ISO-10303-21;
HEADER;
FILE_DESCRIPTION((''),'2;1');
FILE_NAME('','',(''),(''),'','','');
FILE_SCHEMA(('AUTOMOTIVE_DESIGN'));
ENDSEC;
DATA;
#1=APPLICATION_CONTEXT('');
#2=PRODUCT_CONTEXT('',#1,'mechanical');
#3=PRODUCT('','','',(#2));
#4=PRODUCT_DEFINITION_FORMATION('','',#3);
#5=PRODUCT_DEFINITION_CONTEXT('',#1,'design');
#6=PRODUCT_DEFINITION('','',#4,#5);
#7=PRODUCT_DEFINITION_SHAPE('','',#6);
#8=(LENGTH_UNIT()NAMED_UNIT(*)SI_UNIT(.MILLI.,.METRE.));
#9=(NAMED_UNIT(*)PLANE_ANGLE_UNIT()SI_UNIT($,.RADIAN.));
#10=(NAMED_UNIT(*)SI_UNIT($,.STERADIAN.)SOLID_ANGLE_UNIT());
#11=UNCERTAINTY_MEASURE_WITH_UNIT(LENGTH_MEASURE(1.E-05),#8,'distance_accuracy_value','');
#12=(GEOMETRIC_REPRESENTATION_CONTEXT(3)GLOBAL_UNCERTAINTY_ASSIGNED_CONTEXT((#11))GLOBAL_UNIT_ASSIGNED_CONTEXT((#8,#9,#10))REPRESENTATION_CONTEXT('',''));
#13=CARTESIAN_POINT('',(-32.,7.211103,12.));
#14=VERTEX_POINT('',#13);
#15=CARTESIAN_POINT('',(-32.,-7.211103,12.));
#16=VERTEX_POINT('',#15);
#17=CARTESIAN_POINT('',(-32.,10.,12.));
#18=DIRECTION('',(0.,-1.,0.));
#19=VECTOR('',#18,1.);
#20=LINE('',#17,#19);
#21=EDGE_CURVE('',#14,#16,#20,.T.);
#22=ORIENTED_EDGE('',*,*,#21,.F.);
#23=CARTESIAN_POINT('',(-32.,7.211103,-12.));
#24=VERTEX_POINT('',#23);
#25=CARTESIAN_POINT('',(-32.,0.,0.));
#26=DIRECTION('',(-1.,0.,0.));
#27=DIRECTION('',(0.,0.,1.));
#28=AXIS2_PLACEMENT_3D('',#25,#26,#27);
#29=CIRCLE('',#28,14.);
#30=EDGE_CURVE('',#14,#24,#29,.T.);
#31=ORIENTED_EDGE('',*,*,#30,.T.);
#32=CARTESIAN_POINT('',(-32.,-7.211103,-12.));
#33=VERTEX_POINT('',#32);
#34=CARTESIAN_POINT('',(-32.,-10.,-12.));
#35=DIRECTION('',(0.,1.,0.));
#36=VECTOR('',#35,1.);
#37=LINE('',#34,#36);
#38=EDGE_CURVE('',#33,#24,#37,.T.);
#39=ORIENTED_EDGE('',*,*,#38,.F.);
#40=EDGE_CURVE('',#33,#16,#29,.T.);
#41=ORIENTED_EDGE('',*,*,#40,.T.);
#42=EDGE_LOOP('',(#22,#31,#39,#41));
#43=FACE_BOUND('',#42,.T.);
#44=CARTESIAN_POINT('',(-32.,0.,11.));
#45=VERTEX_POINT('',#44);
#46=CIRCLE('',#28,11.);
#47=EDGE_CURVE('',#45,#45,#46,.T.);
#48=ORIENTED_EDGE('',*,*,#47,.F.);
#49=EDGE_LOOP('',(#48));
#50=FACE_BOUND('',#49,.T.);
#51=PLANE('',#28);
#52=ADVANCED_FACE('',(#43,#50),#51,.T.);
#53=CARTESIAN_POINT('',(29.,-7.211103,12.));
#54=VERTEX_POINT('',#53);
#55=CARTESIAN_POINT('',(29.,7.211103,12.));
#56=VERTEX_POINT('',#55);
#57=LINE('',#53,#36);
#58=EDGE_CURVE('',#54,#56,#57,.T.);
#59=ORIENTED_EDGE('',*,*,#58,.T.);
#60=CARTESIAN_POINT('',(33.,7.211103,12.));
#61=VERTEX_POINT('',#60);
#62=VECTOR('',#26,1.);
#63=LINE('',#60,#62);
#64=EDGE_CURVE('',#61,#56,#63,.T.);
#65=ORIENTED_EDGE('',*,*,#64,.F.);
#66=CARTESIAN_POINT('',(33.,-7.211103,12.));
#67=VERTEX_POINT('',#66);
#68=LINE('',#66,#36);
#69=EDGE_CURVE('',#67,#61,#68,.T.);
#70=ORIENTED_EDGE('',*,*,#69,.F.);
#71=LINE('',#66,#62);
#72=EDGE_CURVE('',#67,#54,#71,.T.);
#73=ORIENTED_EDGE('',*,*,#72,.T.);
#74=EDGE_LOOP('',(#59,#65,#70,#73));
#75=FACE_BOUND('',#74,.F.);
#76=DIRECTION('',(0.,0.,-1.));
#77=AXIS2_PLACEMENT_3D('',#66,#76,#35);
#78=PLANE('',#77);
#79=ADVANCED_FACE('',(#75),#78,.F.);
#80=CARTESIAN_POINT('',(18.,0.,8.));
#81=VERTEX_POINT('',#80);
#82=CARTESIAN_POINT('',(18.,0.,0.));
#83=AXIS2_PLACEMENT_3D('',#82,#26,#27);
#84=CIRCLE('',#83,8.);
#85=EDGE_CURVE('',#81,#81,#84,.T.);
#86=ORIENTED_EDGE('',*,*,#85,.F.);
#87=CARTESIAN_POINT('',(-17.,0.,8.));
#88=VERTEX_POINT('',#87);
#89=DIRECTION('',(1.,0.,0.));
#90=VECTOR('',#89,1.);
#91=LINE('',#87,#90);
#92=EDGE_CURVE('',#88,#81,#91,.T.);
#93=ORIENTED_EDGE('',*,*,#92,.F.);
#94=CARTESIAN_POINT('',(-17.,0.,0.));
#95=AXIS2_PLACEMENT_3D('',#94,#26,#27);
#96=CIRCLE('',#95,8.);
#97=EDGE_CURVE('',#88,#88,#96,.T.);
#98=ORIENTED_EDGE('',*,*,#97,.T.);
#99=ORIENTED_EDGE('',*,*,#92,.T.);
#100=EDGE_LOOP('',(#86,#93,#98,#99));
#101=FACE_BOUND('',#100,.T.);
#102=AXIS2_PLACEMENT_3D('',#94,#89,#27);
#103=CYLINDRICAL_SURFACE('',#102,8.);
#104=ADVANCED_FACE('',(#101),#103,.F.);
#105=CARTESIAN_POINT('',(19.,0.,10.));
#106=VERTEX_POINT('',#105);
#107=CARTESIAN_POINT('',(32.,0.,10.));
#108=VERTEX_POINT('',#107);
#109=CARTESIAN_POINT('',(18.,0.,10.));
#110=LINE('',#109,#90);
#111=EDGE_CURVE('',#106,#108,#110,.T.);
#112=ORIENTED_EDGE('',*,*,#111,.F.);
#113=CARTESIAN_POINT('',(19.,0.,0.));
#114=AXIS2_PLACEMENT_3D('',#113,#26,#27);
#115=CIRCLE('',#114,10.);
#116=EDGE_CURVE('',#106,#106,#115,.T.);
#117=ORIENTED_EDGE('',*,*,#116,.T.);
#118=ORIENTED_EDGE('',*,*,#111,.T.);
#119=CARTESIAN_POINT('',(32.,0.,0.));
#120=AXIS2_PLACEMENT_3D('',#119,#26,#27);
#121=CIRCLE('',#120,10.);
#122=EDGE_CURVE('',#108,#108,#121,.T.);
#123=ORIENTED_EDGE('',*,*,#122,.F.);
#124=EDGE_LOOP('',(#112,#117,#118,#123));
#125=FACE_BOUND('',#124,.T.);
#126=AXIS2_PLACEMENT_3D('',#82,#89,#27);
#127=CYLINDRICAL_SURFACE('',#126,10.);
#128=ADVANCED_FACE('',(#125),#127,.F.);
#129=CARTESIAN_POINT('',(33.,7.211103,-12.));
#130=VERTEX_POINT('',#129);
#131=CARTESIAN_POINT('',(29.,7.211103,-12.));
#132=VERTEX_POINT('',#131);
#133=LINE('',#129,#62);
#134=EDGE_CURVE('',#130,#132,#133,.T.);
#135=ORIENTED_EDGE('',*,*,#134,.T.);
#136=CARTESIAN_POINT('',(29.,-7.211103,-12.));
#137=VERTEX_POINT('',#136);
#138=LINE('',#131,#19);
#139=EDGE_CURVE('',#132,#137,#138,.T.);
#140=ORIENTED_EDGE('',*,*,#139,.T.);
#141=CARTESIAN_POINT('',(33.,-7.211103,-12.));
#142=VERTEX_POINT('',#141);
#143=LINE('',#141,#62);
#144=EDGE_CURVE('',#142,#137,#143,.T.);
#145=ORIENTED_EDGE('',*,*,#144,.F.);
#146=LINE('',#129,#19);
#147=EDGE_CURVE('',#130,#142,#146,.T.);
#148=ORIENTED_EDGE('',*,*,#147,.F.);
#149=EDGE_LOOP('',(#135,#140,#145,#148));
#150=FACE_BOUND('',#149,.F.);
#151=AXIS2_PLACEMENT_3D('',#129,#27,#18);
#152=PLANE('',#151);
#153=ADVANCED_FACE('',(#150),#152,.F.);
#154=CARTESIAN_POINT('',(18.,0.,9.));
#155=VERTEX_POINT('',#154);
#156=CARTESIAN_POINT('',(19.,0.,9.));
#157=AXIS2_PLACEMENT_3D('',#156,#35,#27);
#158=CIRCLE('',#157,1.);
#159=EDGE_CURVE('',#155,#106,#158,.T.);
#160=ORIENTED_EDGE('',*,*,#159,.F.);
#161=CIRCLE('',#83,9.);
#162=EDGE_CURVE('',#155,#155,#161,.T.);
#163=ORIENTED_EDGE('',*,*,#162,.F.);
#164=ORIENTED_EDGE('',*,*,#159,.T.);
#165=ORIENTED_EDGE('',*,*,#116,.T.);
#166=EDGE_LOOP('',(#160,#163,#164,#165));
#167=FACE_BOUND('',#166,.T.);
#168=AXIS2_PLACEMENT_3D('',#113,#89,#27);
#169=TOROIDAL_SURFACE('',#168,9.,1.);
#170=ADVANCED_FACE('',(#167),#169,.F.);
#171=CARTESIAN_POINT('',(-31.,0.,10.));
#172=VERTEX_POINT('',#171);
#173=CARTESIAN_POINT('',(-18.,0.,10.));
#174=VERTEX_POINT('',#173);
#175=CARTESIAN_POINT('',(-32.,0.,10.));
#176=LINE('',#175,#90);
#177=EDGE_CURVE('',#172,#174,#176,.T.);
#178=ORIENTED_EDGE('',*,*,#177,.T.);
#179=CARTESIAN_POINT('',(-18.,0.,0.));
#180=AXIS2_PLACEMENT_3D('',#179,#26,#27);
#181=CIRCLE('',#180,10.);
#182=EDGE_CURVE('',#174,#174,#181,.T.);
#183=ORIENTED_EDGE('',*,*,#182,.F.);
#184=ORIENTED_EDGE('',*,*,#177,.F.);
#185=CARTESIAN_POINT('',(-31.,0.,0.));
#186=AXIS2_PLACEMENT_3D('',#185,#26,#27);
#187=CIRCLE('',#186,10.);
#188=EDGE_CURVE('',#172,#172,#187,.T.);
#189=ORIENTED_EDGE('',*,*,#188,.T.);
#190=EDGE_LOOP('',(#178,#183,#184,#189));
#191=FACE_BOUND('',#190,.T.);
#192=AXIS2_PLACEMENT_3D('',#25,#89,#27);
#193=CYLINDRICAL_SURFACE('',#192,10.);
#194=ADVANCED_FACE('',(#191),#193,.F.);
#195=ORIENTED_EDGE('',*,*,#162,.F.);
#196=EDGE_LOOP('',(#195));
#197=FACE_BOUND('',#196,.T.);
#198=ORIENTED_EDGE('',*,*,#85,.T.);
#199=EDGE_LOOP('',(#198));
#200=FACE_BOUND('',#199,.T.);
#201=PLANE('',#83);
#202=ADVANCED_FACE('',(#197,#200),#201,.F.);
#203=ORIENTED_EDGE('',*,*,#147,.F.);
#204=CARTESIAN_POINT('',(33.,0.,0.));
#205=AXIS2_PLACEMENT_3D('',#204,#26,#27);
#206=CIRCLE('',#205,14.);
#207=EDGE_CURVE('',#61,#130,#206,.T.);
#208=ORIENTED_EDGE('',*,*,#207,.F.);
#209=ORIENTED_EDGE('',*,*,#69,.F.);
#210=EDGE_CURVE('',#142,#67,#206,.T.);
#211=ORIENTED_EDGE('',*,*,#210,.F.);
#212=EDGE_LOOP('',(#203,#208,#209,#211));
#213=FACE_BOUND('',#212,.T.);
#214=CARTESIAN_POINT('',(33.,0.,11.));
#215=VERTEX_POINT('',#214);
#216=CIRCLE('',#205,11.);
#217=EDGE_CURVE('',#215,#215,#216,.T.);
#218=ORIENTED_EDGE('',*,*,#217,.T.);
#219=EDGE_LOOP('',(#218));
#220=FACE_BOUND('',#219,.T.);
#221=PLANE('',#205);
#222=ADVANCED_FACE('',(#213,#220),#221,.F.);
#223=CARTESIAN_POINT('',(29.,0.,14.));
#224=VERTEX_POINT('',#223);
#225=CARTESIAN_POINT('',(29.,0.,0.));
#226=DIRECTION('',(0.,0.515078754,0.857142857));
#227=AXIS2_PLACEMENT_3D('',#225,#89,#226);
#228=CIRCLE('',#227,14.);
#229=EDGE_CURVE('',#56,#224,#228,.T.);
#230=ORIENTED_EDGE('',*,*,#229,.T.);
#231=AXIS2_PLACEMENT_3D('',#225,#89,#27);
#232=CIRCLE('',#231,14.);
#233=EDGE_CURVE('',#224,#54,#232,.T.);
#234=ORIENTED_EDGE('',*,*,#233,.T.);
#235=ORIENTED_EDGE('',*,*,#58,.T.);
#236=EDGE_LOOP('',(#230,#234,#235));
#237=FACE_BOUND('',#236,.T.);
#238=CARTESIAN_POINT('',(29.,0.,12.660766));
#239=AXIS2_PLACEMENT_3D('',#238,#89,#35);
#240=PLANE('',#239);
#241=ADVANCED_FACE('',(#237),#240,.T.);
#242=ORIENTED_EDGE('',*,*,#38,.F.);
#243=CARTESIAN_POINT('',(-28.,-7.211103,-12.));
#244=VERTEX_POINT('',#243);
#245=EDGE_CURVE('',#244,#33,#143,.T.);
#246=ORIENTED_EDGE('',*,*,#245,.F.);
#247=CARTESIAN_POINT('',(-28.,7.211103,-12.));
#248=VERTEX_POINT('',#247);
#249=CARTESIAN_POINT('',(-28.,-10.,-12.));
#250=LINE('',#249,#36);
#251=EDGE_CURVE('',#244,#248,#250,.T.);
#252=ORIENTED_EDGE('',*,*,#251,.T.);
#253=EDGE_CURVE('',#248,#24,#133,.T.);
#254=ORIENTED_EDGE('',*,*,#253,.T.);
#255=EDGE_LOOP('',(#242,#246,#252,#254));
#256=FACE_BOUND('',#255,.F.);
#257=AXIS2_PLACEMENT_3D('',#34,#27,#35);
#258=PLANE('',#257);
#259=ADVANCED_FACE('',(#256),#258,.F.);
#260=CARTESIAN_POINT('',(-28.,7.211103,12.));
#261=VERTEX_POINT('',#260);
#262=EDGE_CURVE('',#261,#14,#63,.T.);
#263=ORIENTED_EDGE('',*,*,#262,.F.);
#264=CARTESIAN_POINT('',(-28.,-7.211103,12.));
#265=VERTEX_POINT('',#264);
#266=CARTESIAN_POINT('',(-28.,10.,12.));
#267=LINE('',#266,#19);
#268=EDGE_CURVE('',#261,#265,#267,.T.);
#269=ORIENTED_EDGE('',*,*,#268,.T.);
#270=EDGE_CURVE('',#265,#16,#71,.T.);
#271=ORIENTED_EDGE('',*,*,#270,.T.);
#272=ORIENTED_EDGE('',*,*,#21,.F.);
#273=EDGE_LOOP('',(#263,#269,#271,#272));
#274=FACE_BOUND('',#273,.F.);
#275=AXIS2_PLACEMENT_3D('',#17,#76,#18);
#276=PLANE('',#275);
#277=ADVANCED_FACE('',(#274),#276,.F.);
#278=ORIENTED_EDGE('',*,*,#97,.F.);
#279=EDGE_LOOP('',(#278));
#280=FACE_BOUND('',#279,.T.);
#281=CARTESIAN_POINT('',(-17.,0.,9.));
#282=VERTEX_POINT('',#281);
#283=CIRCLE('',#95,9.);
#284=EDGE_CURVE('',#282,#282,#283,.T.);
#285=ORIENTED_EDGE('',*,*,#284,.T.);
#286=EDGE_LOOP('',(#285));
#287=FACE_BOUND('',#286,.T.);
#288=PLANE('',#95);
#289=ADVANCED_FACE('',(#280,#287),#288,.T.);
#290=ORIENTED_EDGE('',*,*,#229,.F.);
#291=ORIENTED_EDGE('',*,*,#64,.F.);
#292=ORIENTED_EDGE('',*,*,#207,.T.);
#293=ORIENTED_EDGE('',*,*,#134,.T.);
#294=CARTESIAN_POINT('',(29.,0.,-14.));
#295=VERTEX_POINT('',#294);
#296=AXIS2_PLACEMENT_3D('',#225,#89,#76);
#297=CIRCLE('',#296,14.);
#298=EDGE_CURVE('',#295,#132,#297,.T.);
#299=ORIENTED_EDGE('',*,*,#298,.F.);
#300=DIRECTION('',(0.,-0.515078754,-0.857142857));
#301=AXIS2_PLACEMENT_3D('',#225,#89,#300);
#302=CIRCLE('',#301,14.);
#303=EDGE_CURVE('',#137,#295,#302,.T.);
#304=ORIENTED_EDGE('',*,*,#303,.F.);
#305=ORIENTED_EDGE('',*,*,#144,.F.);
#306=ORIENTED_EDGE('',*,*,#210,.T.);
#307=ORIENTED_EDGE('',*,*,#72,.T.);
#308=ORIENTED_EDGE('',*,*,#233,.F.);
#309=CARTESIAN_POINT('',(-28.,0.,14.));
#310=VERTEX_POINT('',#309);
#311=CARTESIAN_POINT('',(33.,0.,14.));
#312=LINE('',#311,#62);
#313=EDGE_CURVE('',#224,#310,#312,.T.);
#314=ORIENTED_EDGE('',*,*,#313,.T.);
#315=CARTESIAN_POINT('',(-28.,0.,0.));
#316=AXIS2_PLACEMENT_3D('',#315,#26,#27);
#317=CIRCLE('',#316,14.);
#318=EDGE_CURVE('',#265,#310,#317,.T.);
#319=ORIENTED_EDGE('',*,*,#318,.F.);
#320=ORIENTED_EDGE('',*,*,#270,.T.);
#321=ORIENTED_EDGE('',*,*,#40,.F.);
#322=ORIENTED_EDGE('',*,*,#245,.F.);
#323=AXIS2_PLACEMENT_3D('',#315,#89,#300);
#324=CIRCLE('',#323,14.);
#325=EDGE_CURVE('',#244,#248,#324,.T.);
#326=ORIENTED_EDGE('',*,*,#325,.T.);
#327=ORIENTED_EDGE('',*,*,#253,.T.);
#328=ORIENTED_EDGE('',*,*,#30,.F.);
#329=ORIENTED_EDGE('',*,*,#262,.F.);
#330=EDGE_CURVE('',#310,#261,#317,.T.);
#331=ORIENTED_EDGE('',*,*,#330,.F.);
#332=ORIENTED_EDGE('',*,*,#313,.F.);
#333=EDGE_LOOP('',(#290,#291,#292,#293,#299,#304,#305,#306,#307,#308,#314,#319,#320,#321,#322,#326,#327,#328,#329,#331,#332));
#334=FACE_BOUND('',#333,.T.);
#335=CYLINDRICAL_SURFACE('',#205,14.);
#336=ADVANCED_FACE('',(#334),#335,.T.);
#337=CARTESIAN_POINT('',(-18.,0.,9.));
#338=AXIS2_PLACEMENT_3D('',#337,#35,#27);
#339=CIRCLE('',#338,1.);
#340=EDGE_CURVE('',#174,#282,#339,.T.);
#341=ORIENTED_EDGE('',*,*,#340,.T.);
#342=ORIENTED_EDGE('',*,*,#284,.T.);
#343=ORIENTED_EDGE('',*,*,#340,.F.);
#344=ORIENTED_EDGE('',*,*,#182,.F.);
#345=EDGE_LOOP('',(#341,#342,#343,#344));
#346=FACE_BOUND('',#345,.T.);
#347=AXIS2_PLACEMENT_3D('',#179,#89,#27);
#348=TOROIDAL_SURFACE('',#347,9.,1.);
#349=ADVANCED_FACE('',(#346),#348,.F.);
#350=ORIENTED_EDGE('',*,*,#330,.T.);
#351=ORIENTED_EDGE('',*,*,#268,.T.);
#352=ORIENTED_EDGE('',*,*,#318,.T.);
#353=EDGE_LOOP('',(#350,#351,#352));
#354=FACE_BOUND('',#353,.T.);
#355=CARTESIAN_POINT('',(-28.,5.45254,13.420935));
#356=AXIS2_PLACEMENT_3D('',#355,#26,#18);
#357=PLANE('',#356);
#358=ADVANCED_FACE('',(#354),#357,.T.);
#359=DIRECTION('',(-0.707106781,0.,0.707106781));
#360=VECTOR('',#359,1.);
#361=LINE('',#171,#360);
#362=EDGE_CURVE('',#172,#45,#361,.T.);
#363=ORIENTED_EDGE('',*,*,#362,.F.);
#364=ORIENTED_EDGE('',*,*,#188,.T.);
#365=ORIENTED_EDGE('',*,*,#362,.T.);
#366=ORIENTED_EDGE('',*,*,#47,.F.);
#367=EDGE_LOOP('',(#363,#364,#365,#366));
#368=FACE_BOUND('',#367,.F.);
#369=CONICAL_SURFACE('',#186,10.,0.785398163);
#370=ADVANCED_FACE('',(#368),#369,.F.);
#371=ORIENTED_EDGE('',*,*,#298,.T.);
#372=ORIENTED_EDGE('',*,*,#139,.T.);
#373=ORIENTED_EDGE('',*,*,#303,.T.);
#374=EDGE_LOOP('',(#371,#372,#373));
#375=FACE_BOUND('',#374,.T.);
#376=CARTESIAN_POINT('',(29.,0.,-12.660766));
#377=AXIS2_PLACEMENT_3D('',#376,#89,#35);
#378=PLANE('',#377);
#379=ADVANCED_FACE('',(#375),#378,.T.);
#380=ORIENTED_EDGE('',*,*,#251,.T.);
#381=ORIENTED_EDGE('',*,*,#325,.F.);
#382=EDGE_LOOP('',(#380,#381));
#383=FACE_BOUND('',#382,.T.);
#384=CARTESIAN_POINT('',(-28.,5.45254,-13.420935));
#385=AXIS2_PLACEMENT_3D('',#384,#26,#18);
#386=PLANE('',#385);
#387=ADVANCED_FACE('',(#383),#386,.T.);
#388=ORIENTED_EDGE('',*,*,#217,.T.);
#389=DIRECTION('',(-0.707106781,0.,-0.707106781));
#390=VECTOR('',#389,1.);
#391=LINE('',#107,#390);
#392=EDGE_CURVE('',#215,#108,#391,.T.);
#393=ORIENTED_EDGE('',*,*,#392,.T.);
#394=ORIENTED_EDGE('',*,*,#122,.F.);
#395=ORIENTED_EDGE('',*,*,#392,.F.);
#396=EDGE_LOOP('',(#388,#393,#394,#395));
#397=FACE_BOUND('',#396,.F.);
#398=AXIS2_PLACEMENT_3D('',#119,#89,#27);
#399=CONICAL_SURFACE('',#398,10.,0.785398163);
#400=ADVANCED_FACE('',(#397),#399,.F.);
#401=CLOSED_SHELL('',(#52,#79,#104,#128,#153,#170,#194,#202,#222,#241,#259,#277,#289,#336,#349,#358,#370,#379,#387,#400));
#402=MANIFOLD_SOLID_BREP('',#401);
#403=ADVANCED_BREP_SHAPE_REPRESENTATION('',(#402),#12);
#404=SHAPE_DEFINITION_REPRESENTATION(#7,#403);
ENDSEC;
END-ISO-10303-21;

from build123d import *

# Parameters (mm, degrees)
F2_R     = 1
F3_SIZE  = 1
F5_DEPTH = 4
F7_DEPTH = 4


with BuildPart() as f1:
    # F0 (on Front) → F1 (revolve)
    with BuildSketch(Plane.XZ):
        Polygon((-32, 14), (-32, 10), (-17, 10), (-17, 8), (18, 8), (18, 10), (33, 10), (33, 14), align=None)
    revolve(axis=Axis((4.3690800667, 0, 0), (-1, 0, 0)))

    # F2
    f2_edges = [f1.edges().sort_by_distance(p)[0] for p in [
        (18, 0, -10),
        (-17, 0, -10),
    ]]
    fillet(f2_edges, radius=F2_R)

    # F3
    f3_edges = [f1.edges().sort_by_distance(p)[0] for p in [
        (-32, 0, -10),
        (33, 0, -10),
    ]]
    chamfer(f3_edges, length=F3_SIZE)

    # F4 (on face) → F5 (cut)
    with BuildSketch(Plane(origin=(-32, 0, 0), x_dir=(0, -1, 0), z_dir=(-1, 0, 0))):
        with BuildLine():
            Line((0, 14), (-10, 14))
            Line((-10, 14), (-10, 12))
            Line((-10, 12), (-7.2111025509, 12))
            ThreePointArc((-7.2111025509, 12), (-3.7416573868, 13.4907375632), (0, 14))
        make_face()
        with BuildLine():
            ThreePointArc((7.2111025509, 12), (3.7416573868, 13.4907375632), (0, 14))
            ThreePointArc((0, 14), (-3.7416573868, 13.4907375632), (-7.2111025509, 12))
            Line((-7.2111025509, 12), (7.2111025509, 12))
        make_face()
        with BuildLine():
            Line((10, 14), (0, 14))
            ThreePointArc((0, 14), (3.7416573868, 13.4907375632), (7.2111025509, 12))
            Line((7.2111025509, 12), (10, 12))
            Line((10, 12), (10, 14))
        make_face()
        with BuildLine():
            ThreePointArc((0, -14), (-3.7416573868, -13.4907375632), (-7.2111025509, -12))
            Line((-7.2111025509, -12), (-10, -12))
            Line((-10, -12), (-10, -14))
            Line((-10, -14), (0, -14))
        make_face()
        with BuildLine():
            Line((7.2111025509, -12), (-7.2111025509, -12))
            ThreePointArc((-7.2111025509, -12), (-3.7416573868, -13.4907375632), (0, -14))
            ThreePointArc((0, -14), (3.7416573868, -13.4907375632), (7.2111025509, -12))
        make_face()
        with BuildLine():
            Line((10, -12), (7.2111025509, -12))
            ThreePointArc((7.2111025509, -12), (3.7416573868, -13.4907375632), (0, -14))
            Line((0, -14), (10, -14))
            Line((10, -14), (10, -12))
        make_face()
    extrude(amount=-F5_DEPTH, mode=Mode.SUBTRACT)

    # F6 (on face) → F7 (cut)
    with BuildSketch(Plane.YZ.offset(33)):
        with BuildLine():
            ThreePointArc((7.2111025509, 12), (3.7416573868, 13.4907375632), (0, 14))
            ThreePointArc((0, 14), (-3.7416573868, 13.4907375632), (-7.2111025509, 12))
            Line((-7.2111025509, 12), (7.2111025509, 12))
        make_face()
        with BuildLine():
            Line((7.2111025509, -12), (-7.2111025509, -12))
            ThreePointArc((-7.2111025509, -12), (-3.7416573868, -13.4907375632), (0, -14))
            ThreePointArc((0, -14), (3.7416573868, -13.4907375632), (7.2111025509, -12))
        make_face()
    extrude(amount=-F7_DEPTH, mode=Mode.SUBTRACT)


solid = f1.part
